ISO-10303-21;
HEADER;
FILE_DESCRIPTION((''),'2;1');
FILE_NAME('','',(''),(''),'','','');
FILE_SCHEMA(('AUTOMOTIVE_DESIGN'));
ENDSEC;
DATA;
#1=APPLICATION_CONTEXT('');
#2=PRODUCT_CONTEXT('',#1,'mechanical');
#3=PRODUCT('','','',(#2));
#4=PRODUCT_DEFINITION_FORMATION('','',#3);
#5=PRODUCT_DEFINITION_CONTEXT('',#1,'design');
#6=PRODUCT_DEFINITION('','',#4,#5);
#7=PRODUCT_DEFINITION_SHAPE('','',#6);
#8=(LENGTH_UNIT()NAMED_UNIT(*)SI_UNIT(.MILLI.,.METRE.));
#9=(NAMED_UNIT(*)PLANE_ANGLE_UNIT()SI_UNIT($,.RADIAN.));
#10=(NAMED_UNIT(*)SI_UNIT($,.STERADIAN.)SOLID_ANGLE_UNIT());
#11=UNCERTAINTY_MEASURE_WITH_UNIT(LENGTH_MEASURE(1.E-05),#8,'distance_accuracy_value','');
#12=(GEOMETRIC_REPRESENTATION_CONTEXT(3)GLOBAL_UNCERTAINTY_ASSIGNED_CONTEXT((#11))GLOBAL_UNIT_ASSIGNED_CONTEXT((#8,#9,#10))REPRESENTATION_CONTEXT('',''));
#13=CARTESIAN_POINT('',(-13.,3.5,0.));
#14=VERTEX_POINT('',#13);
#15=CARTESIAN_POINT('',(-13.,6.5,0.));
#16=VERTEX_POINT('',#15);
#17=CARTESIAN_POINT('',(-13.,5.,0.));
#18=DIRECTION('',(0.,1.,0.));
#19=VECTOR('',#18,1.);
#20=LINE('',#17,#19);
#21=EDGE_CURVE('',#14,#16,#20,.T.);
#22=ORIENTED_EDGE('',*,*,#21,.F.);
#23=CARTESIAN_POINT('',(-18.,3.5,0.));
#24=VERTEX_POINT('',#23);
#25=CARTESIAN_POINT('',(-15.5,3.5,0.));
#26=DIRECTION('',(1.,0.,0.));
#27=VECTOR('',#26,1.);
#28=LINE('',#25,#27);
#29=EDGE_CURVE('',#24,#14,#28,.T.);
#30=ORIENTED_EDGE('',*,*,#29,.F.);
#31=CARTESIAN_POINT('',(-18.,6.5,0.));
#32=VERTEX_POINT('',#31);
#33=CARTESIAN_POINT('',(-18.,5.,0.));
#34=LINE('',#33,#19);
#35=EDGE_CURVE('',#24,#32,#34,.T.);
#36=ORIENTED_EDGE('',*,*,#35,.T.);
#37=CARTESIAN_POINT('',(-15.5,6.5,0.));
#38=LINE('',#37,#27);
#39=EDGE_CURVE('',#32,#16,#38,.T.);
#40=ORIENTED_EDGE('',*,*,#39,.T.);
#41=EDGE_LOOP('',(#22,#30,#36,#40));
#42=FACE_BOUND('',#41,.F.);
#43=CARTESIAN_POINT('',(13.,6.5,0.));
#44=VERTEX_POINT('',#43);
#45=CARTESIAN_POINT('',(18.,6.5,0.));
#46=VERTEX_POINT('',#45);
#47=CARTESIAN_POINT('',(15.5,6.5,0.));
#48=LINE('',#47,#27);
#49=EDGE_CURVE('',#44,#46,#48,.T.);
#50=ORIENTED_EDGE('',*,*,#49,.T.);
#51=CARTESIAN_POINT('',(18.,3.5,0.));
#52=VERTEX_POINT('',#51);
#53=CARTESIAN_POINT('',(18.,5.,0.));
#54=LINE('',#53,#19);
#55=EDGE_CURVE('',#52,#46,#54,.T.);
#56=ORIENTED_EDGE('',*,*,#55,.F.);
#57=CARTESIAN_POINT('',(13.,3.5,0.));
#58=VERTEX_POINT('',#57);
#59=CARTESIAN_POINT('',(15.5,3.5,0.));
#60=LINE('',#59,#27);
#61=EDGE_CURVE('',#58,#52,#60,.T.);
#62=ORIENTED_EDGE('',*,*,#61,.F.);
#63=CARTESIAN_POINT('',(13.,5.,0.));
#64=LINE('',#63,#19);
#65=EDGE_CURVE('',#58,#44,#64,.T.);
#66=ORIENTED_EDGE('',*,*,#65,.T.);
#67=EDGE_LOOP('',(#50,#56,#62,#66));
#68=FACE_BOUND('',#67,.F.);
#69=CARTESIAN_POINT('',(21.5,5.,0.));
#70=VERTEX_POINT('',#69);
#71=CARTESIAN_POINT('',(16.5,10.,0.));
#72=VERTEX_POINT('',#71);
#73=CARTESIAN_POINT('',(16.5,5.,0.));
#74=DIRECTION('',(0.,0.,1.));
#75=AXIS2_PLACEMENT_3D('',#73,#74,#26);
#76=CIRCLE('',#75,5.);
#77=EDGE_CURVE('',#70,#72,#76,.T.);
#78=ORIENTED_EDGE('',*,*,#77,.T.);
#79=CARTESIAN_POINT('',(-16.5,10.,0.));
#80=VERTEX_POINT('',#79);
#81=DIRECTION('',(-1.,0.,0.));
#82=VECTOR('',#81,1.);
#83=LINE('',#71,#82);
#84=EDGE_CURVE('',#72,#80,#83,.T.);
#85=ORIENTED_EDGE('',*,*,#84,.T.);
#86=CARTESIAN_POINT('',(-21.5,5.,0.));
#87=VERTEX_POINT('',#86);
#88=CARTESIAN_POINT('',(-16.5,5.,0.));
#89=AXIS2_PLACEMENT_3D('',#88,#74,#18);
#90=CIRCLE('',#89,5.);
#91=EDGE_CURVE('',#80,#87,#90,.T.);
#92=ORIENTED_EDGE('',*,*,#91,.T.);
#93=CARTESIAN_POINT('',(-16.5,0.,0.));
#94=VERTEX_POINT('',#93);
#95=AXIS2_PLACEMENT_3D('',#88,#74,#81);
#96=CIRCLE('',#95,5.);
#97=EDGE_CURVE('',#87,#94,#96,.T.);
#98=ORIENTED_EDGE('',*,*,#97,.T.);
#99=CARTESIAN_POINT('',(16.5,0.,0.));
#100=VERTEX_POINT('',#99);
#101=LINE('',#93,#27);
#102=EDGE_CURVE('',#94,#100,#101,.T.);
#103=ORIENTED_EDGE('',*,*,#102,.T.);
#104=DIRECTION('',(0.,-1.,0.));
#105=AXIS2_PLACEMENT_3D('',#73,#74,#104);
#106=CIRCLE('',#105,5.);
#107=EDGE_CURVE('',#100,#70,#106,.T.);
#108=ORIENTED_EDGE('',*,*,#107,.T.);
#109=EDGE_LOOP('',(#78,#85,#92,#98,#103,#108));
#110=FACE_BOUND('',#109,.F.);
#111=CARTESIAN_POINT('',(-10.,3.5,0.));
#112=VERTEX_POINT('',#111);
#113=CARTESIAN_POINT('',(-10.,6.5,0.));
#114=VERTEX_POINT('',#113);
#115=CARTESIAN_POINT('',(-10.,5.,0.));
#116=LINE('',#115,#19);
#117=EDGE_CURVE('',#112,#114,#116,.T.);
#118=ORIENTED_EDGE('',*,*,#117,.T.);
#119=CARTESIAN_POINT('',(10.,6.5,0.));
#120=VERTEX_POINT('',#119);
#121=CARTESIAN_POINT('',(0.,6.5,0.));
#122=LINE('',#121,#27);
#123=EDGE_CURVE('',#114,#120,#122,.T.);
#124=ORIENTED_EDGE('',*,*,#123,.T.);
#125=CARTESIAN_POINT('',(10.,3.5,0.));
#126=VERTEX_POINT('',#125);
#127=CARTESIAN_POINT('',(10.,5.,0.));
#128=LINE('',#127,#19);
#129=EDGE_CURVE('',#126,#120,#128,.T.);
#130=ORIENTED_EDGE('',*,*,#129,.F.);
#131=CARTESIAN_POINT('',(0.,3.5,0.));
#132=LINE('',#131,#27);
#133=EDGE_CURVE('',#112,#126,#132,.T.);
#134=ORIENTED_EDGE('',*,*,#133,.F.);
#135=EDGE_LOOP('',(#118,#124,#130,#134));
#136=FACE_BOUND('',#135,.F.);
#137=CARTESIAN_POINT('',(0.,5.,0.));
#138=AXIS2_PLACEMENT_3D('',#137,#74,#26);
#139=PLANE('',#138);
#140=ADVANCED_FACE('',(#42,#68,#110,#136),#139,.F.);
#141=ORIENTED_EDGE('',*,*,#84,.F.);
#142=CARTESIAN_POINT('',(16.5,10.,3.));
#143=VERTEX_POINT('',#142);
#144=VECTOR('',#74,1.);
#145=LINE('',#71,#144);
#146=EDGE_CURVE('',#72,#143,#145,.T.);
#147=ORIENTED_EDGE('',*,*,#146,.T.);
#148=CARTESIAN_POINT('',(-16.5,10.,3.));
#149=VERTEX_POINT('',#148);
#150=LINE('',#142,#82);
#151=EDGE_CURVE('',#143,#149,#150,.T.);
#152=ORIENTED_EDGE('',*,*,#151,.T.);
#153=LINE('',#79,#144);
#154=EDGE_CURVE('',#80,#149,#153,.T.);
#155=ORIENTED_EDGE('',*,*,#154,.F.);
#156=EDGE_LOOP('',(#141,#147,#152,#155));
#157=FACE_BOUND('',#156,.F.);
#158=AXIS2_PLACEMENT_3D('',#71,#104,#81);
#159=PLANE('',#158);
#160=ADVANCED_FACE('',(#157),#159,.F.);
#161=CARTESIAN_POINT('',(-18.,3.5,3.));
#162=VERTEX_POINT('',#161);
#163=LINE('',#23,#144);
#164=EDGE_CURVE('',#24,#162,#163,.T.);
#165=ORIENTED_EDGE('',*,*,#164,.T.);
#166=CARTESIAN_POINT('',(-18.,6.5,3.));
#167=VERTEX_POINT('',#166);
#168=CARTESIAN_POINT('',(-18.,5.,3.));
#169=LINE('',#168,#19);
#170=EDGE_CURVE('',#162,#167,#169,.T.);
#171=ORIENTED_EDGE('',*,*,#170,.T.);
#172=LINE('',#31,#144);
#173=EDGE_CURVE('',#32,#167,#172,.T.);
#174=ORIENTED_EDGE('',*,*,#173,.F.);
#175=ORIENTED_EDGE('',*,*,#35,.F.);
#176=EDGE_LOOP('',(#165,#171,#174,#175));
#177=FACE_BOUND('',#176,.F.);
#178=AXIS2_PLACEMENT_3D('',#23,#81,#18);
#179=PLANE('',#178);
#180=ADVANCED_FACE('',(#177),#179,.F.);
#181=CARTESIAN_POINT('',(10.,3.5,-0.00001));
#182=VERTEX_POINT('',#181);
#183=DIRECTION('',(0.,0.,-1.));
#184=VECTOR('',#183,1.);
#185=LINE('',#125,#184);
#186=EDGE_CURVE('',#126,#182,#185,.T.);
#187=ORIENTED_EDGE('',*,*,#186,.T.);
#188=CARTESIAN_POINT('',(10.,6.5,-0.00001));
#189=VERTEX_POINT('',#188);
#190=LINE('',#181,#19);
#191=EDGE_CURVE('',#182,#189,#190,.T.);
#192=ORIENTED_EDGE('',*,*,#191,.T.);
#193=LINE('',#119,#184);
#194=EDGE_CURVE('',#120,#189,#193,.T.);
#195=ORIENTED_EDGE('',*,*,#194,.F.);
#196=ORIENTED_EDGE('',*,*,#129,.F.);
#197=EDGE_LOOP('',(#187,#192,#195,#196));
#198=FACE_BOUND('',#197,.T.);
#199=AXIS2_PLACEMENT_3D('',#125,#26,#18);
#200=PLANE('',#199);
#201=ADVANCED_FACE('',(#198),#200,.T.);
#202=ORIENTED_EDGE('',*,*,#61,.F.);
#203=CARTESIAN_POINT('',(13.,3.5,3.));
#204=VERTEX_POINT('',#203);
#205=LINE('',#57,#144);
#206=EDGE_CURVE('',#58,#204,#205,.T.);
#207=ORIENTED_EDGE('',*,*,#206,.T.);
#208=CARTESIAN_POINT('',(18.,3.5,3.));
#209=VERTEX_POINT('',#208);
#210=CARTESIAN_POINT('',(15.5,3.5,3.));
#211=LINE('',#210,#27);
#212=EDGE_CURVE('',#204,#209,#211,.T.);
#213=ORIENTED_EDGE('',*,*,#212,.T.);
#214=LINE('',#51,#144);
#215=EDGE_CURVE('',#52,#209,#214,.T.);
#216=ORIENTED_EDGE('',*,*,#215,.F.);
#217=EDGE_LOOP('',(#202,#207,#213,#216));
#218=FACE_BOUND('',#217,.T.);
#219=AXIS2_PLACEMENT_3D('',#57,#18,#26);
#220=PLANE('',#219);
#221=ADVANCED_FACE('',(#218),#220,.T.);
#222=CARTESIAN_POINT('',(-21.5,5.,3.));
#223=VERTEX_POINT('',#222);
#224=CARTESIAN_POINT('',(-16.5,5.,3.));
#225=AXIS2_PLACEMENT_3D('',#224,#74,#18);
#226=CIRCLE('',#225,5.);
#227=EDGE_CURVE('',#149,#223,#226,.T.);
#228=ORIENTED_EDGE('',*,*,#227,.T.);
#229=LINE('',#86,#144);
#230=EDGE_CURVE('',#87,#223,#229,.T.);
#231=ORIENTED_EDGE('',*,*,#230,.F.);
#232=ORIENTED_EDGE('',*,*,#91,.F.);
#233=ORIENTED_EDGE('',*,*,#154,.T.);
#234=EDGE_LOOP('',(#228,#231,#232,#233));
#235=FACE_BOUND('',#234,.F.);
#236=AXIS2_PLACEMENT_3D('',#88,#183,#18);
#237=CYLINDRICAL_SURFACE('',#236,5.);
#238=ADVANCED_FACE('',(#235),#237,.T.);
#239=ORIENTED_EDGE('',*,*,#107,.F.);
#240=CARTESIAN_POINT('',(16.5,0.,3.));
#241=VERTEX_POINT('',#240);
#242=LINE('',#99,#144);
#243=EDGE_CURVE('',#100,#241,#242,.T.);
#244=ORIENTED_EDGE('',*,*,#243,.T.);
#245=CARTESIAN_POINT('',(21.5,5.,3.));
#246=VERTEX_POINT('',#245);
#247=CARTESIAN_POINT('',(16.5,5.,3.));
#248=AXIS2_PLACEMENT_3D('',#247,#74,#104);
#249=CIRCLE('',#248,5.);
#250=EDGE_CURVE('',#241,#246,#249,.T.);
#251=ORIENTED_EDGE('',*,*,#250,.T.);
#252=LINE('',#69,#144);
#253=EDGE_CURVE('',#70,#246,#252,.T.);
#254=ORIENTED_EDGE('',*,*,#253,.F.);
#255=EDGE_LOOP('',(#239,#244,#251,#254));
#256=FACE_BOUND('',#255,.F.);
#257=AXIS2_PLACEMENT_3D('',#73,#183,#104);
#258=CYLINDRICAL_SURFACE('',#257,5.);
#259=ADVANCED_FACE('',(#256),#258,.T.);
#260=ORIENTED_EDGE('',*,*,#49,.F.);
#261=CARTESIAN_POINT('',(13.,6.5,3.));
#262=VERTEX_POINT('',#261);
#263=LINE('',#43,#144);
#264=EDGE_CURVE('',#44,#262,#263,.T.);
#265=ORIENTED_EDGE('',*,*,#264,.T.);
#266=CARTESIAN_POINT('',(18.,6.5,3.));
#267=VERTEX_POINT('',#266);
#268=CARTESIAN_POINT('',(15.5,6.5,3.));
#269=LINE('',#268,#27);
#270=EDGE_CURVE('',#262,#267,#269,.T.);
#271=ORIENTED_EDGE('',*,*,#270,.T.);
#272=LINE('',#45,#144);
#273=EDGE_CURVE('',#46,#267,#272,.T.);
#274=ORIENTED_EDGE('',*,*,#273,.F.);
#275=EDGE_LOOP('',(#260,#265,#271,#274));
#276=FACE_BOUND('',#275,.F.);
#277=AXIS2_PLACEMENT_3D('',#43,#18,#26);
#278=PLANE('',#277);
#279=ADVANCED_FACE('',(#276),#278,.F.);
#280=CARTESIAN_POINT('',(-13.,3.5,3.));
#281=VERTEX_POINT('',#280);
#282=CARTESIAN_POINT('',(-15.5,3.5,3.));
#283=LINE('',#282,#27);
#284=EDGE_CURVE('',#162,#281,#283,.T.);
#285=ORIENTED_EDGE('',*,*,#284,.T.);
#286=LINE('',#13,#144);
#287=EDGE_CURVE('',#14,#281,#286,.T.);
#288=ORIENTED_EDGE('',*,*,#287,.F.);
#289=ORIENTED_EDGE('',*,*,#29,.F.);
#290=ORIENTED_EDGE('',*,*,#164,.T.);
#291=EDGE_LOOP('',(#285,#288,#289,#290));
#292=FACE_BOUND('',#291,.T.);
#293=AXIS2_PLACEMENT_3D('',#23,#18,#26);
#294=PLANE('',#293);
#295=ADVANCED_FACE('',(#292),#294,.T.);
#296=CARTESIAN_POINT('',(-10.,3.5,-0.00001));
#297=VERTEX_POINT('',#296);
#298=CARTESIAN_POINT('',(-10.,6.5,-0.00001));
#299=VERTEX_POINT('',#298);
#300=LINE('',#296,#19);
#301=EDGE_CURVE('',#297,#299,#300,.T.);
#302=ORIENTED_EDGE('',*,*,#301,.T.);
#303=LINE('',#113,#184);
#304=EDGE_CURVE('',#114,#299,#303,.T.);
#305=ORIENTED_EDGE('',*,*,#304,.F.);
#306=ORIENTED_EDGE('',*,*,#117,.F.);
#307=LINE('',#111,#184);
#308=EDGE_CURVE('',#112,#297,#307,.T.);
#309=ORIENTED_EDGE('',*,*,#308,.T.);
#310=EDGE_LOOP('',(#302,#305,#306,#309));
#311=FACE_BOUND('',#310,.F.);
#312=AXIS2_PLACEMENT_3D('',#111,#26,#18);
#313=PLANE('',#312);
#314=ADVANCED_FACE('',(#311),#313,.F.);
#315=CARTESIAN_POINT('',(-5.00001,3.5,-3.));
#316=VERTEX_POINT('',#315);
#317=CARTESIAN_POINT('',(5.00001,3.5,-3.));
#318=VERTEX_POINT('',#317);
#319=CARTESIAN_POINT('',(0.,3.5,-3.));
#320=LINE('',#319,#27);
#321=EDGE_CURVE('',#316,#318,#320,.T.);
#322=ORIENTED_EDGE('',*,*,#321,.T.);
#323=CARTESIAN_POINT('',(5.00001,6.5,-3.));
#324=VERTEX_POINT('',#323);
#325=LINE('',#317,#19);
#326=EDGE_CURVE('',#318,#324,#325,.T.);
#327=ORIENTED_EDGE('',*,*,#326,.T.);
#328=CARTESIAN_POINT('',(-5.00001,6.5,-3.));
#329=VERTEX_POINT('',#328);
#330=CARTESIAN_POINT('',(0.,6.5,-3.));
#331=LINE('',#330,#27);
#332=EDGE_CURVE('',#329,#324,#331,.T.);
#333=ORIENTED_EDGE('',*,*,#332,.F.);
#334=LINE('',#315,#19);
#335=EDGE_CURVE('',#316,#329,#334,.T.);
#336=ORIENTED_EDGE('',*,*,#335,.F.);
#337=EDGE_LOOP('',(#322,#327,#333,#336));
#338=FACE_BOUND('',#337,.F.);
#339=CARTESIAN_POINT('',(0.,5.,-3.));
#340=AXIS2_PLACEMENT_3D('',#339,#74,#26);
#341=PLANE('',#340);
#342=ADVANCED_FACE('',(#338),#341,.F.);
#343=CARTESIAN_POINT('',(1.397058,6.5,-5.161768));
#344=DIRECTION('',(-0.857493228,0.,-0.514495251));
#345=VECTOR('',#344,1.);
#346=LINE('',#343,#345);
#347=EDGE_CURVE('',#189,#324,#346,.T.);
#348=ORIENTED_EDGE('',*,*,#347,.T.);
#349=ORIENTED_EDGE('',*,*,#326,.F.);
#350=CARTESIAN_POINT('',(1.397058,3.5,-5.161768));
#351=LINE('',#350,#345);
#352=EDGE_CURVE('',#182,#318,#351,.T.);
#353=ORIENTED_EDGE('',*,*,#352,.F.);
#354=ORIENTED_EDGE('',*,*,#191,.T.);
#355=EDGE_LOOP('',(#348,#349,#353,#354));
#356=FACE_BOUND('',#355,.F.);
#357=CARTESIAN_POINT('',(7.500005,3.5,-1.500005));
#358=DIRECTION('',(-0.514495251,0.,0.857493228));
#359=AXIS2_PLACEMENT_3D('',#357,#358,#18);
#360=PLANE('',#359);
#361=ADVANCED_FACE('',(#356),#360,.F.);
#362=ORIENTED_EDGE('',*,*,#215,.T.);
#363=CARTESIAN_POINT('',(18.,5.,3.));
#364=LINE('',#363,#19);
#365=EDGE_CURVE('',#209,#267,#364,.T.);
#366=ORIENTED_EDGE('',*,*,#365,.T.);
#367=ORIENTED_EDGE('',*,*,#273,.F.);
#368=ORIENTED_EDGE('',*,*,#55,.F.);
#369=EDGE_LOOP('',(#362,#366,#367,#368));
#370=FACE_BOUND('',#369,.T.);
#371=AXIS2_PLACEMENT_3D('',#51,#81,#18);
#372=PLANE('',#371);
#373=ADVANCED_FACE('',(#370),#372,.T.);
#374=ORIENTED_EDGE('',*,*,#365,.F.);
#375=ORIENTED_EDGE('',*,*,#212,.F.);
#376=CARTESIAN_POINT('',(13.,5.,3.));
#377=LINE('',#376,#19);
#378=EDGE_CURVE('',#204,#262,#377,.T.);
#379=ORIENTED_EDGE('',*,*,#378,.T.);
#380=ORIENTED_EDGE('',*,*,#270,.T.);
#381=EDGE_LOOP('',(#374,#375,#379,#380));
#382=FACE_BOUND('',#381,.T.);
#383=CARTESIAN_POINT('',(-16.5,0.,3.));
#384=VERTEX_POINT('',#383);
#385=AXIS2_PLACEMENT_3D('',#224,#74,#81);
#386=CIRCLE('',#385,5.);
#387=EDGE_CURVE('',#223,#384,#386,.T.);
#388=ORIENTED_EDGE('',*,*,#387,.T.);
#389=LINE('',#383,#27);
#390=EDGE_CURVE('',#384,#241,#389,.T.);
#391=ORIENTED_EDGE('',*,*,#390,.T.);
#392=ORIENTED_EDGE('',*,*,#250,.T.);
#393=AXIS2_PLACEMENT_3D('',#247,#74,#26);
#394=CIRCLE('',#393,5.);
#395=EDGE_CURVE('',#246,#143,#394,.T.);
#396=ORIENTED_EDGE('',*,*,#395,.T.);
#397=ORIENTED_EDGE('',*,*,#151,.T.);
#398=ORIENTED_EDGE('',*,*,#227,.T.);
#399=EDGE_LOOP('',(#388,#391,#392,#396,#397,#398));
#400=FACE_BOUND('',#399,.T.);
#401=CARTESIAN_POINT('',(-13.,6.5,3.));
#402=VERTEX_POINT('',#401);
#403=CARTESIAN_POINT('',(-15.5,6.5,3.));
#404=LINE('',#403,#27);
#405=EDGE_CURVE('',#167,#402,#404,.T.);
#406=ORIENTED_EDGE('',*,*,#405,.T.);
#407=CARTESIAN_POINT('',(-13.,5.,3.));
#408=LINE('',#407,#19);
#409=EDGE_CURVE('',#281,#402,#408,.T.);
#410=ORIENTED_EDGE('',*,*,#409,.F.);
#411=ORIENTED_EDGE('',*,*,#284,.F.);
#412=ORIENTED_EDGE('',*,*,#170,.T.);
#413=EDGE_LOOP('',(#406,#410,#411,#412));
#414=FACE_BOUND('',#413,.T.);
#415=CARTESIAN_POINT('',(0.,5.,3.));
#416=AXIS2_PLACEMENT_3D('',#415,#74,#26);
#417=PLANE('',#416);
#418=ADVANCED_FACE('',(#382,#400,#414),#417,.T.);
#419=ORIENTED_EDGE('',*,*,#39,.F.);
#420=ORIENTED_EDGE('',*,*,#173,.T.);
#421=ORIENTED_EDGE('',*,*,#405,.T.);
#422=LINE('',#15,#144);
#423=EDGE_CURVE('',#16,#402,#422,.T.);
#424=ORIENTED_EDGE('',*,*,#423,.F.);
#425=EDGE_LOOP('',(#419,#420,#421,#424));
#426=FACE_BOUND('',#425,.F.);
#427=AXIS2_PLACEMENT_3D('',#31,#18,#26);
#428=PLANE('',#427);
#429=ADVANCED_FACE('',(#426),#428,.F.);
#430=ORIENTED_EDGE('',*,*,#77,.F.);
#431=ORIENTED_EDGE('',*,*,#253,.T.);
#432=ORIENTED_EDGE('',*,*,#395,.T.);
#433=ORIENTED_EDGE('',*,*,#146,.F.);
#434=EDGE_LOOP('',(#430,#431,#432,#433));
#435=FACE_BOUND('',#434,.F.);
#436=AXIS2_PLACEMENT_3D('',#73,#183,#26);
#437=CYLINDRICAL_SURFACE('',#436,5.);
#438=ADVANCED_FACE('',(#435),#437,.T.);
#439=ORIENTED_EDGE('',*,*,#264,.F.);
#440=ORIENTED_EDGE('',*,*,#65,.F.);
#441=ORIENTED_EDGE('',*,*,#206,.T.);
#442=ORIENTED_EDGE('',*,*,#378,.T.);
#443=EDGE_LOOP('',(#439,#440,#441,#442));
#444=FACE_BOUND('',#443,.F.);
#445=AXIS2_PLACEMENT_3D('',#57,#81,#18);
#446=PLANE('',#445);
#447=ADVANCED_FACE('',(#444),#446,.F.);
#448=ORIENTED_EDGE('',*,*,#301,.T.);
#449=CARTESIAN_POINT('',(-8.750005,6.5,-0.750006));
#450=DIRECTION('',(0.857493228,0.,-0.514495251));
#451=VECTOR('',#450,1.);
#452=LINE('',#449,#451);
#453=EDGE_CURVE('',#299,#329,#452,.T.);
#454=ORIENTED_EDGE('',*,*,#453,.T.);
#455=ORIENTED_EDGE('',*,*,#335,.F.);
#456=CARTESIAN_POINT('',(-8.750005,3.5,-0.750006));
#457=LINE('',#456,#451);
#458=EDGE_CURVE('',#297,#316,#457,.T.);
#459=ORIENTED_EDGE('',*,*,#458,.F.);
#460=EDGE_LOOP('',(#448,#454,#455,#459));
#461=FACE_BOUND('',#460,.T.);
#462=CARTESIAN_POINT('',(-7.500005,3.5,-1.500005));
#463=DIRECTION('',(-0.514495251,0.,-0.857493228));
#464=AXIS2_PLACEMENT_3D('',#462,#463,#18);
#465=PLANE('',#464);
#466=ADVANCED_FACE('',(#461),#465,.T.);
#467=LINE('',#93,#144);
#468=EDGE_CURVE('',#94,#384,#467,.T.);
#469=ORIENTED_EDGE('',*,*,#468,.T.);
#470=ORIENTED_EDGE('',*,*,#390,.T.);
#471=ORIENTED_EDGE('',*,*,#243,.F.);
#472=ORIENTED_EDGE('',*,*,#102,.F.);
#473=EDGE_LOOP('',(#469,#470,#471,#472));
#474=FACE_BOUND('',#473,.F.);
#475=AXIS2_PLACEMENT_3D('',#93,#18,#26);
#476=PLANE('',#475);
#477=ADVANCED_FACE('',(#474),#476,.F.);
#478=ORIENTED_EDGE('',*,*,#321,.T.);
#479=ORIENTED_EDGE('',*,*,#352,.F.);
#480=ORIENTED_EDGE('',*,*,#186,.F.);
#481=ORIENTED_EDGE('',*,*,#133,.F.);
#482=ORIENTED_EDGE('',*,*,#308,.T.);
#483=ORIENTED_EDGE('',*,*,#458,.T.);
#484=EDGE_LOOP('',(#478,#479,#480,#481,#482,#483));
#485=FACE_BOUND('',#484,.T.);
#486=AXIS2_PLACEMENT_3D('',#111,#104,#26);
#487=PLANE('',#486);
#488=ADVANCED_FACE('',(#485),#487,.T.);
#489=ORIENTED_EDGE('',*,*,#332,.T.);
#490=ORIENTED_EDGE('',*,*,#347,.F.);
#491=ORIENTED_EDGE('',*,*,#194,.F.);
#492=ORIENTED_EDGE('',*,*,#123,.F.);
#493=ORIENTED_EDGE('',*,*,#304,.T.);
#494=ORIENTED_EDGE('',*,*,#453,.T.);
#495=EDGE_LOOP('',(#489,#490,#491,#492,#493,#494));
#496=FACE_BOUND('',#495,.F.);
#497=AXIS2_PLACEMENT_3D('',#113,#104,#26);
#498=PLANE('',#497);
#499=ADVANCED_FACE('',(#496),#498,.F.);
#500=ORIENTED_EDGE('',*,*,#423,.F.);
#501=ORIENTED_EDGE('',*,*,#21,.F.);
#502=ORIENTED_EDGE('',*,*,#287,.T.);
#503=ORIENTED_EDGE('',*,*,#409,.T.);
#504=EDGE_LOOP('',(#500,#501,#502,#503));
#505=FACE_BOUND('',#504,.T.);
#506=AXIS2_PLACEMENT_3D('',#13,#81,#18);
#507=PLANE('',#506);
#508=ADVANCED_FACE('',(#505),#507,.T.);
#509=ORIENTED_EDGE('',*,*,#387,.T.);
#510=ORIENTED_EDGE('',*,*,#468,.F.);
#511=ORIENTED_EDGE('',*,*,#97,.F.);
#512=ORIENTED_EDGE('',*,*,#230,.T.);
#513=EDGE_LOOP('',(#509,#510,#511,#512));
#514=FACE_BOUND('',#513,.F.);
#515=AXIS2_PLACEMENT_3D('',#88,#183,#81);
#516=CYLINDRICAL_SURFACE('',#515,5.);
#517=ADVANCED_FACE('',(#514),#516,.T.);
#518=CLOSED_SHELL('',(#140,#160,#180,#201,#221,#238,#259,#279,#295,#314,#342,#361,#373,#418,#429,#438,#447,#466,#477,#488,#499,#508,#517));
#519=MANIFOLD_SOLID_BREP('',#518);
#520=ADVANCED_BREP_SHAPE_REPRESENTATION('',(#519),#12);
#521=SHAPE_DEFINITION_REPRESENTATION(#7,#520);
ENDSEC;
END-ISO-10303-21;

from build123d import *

# Parameters (mm, degrees)
F0_W       = 5
F0_H       = 3
F0_W_2     = 20
F1_DEPTH   = 3
F2_DEPTH   = 3
F3_SIZE2   = 4.99999
F3_SIZE    = 2.99999
F3_2_SIZE2 = 4.99999
F3_2_SIZE  = 2.99999


# Not quite as in the source:
# - a fillet or chamfer is up to 0.001 mm smaller than in the source, because OpenCascade refuses the exact size


with BuildPart() as f1:
    # F0 (on Top) → F1 (new body)
    with BuildSketch(Plane.XY):
        with BuildLine():
            Line((16.5, 10), (-16.5, 10))
            ThreePointArc((-16.5, 10), (-20.0355339059, 8.5355339059), (-21.5, 5))
            ThreePointArc((-21.5, 5), (-20.0355339059, 1.4644660941), (-16.5, 0))
            Line((-16.5, 0), (16.5, 0))
            ThreePointArc((16.5, 0), (20.0355339059, 1.4644660941), (21.5, 5))
            ThreePointArc((21.5, 5), (20.0355339059, 8.5355339059), (16.5, 10))
        make_face()
        with Locations((-15.5, 5)):
            Rectangle(F0_W, F0_H, mode=Mode.SUBTRACT)
        with Locations((0, 5)):
            Rectangle(F0_W_2, F0_H, mode=Mode.SUBTRACT)
        with Locations((15.5, 5)):
            Rectangle(F0_W, F0_H, mode=Mode.SUBTRACT)
        with Locations((0, 5)):
            Rectangle(F0_W_2, F0_H)
    extrude(amount=F1_DEPTH)

    # F0 (on Top) → F2 (join)
    with BuildSketch(Plane.XY):
        with Locations((0, 5)):
            Rectangle(F0_W_2, F0_H)
    extrude(amount=-F2_DEPTH)

    # F3 (size 3 and 5 in the source; OpenCascade refuses exactly that, so slightly less here)
    f3_edges = [f1.edges().sort_by_distance(p)[0] for p in [
        (-10, 5, -3),
    ]]
    f3_side = f1.faces().sort_by_distance((-10, 5, -1.5))[0]
    chamfer(f3_edges, length=F3_SIZE, length2=F3_SIZE2, reference=f3_side)

    # F3#2 (size 3 and 5 in the source; OpenCascade refuses exactly that, so slightly less here)
    f3_2_edges = [f1.edges().sort_by_distance(p)[0] for p in [
        (10, 5, -3),
    ]]
    f3_2_side = f1.faces().sort_by_distance((10, 5, -1.5))[0]
    chamfer(f3_2_edges, length=F3_2_SIZE, length2=F3_2_SIZE2, reference=f3_2_side)


solid = f1.part
